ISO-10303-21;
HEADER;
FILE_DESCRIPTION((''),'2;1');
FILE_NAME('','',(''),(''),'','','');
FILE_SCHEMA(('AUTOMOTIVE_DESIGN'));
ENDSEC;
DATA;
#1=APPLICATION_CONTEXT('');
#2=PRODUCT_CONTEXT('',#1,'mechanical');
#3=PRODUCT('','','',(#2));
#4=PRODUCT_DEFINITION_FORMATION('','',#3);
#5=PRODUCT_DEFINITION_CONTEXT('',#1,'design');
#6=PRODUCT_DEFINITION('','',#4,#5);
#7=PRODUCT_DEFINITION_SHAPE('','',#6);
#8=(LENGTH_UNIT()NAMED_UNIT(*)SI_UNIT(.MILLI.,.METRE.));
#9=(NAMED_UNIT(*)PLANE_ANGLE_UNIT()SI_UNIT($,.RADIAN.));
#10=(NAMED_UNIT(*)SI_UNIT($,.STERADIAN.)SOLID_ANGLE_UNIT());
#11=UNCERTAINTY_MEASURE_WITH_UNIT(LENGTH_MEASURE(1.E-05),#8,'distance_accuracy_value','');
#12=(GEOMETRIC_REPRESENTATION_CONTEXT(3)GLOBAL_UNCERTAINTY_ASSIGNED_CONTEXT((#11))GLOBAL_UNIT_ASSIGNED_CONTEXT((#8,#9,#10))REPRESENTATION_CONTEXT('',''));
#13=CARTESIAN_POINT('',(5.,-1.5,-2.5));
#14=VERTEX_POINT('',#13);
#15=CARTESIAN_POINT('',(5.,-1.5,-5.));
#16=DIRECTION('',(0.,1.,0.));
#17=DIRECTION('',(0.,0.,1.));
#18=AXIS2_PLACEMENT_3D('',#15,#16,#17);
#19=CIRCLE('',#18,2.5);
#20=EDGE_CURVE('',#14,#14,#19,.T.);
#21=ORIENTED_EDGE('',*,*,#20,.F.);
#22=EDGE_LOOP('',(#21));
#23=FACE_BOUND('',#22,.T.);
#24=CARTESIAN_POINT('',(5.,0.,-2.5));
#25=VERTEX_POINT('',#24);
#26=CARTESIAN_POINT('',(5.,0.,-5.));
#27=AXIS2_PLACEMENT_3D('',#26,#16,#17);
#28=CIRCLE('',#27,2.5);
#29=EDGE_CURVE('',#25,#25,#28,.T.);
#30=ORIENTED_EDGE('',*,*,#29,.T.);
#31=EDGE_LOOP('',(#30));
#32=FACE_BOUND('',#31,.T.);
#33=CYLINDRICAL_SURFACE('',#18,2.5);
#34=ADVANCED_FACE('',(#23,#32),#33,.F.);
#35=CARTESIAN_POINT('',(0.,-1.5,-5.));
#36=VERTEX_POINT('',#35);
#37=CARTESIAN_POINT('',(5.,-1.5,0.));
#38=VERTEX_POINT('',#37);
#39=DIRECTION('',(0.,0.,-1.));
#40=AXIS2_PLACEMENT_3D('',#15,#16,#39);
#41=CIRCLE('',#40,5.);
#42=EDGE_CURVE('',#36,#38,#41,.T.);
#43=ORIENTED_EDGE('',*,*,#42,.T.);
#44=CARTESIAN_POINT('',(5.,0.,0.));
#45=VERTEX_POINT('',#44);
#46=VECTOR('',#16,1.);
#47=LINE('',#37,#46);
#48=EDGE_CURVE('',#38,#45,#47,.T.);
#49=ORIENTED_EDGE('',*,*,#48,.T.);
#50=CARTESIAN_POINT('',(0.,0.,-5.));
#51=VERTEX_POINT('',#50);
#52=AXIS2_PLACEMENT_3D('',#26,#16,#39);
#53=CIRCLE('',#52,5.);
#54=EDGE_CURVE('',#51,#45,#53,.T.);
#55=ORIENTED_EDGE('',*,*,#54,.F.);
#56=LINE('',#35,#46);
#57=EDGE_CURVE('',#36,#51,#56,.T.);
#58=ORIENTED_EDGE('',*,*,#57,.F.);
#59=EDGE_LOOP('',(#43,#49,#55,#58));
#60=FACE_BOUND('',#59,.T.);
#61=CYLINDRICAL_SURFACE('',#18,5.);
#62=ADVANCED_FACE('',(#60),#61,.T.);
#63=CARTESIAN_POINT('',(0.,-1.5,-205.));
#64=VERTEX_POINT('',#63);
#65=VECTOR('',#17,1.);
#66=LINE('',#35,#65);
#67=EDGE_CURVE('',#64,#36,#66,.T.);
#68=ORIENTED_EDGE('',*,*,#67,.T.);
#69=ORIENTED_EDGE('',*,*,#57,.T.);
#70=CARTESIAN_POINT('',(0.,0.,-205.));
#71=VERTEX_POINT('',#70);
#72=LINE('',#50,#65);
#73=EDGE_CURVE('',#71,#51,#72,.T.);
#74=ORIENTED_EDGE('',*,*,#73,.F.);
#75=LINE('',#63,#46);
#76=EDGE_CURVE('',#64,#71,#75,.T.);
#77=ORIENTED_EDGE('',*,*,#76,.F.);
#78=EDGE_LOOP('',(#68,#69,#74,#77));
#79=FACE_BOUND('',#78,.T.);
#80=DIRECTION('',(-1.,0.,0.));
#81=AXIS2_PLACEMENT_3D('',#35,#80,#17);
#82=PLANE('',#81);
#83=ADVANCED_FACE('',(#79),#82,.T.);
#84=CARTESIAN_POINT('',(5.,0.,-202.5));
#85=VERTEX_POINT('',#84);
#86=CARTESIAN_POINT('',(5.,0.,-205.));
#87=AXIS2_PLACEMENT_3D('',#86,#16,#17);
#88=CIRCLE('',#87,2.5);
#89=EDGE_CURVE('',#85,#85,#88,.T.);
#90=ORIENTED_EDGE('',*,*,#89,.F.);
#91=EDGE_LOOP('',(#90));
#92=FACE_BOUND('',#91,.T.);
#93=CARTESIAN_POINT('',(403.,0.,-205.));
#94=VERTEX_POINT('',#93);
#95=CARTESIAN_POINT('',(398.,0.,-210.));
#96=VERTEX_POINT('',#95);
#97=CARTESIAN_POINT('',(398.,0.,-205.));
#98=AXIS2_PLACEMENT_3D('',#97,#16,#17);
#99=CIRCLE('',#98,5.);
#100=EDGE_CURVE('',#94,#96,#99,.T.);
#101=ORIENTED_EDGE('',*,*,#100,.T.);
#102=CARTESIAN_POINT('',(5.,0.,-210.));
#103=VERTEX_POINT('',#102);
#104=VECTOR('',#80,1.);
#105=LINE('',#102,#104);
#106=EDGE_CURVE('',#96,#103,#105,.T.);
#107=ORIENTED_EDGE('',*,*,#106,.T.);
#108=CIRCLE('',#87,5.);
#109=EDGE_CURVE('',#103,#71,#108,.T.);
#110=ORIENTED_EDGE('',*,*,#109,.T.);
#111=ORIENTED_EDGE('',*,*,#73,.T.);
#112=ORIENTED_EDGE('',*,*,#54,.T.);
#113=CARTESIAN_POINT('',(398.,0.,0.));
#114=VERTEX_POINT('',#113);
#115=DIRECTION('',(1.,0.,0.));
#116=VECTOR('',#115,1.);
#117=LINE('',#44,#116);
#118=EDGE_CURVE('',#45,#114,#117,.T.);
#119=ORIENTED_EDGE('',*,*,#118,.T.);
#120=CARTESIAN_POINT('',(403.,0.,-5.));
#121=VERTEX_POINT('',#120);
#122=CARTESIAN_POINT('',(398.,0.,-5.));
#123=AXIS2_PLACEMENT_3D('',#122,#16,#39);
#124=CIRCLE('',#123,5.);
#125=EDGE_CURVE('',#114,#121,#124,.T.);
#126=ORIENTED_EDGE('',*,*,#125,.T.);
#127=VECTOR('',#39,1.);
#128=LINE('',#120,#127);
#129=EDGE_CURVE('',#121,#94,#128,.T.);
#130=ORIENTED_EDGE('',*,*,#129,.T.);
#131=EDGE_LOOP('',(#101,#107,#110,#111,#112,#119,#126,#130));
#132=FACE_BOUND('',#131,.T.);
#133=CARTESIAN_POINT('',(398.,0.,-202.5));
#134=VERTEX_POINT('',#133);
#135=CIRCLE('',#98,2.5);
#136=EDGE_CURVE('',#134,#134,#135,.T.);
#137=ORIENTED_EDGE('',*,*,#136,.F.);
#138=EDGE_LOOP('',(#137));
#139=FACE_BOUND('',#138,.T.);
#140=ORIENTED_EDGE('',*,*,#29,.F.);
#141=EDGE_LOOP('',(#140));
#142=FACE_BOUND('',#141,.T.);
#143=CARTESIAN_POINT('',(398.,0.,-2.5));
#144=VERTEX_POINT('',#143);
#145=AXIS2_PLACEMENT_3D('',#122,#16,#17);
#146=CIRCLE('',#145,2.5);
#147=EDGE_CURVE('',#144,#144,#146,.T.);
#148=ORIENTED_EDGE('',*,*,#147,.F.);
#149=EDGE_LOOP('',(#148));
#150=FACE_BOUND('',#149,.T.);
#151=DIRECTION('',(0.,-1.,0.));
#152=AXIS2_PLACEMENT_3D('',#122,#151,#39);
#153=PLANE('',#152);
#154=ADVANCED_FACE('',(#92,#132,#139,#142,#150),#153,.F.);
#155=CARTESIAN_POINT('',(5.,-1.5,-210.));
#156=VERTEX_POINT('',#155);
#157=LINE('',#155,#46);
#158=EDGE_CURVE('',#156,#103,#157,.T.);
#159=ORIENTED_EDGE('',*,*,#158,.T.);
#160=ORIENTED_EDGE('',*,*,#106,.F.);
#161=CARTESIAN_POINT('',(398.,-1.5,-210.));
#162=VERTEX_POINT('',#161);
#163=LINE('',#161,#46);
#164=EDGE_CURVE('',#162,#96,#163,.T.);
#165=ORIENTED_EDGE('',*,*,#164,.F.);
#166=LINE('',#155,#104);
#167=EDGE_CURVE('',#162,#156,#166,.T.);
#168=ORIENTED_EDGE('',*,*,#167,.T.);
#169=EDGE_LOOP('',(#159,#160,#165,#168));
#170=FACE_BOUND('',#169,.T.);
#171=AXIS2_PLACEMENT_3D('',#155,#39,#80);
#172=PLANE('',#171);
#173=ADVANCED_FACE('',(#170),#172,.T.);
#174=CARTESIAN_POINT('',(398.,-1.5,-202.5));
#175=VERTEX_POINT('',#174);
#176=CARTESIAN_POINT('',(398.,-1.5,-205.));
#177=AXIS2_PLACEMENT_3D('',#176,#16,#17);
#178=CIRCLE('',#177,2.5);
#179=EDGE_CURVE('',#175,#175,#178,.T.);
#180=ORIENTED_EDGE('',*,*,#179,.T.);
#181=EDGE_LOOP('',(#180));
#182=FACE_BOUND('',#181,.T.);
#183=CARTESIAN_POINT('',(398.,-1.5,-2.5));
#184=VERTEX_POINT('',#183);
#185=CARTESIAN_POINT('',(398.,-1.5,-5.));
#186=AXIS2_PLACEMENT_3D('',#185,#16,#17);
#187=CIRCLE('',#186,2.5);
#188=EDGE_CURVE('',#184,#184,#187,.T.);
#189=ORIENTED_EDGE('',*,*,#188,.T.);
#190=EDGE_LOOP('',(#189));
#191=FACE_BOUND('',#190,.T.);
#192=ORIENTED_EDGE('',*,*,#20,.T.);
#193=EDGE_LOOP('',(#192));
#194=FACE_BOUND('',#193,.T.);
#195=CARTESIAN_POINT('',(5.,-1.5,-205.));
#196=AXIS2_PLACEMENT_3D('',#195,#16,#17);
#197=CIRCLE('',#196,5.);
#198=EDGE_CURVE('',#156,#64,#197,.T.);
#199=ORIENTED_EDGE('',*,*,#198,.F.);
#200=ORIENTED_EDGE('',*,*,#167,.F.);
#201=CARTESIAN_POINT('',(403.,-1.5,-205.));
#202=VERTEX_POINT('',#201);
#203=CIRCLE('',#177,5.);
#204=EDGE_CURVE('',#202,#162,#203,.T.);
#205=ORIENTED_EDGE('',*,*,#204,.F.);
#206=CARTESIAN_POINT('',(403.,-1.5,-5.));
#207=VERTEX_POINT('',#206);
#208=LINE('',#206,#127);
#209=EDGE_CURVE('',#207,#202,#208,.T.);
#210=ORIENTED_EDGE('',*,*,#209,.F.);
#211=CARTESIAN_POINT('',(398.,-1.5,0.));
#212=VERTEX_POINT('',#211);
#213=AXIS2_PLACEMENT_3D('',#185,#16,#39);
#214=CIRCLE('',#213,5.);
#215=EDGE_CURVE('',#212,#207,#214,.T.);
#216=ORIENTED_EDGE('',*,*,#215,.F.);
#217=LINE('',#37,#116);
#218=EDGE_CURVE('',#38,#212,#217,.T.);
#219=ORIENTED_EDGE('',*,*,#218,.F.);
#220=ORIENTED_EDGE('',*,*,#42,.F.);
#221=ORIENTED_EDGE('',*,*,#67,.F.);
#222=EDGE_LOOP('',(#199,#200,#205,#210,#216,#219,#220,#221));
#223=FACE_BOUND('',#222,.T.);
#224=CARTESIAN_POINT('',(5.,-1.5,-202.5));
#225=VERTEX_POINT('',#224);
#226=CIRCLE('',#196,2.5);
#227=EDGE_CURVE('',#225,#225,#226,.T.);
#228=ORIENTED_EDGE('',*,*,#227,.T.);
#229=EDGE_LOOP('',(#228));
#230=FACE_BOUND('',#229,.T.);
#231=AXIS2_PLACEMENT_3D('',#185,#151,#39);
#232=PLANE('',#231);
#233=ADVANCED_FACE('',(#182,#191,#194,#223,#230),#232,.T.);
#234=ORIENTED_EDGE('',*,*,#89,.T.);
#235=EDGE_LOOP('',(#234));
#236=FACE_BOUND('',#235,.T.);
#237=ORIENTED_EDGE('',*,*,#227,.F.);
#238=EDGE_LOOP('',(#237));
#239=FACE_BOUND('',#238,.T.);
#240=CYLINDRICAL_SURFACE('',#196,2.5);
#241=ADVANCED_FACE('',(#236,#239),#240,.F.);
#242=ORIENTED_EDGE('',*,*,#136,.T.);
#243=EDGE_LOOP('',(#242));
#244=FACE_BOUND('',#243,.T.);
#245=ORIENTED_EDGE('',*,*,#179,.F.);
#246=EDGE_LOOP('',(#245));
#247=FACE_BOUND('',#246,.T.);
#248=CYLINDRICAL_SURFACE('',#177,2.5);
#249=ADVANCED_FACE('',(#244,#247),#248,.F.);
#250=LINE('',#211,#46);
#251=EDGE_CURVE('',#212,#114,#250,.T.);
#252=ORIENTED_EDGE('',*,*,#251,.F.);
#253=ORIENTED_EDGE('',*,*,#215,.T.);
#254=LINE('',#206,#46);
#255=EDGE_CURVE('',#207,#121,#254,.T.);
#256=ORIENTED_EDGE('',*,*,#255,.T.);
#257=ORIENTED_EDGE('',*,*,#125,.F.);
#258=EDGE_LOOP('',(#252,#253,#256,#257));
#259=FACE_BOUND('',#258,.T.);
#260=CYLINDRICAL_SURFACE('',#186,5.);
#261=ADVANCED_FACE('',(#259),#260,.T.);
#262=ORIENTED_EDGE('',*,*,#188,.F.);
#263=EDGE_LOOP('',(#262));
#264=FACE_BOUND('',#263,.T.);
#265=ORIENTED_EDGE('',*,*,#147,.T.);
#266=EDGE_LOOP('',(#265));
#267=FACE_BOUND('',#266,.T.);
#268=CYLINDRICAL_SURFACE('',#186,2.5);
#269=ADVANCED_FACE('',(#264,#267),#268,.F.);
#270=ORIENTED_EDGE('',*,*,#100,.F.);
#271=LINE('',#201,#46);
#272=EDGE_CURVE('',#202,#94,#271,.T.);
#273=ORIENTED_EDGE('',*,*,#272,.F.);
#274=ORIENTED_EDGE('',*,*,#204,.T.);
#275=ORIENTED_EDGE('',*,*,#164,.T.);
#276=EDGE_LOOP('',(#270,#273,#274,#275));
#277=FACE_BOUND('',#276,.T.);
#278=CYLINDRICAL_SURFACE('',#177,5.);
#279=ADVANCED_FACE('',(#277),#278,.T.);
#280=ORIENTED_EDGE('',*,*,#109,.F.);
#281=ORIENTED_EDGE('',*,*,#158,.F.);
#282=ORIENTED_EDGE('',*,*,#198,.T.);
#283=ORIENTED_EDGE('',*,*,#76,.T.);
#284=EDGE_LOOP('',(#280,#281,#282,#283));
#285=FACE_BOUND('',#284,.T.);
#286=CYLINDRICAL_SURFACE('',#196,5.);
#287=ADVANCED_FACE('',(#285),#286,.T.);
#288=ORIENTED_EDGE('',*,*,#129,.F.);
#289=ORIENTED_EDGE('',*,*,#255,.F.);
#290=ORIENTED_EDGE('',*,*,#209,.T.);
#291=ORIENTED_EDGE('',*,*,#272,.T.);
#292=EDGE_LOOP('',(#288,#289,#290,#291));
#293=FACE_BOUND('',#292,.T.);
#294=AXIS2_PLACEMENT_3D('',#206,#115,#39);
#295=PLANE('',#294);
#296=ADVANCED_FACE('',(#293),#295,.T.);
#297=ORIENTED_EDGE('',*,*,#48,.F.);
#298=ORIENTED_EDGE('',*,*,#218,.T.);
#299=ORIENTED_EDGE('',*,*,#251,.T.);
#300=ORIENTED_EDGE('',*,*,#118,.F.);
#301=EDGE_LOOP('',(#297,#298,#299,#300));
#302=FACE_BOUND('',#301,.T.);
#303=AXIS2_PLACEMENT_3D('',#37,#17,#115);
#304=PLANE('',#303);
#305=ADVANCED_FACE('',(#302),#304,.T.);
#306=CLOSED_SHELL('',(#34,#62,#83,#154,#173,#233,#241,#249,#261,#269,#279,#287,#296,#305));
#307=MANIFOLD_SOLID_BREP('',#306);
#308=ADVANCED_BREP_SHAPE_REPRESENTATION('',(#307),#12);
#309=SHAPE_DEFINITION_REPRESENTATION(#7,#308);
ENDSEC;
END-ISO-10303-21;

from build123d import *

# Parameters (mm, degrees)
SKETCH1_R          = 2.5
BASE_FLANGE1_DEPTH = 1.5


# Sheet-metal steps are written as plain solids
with BuildPart() as part:
    # Sketch1 → Base-Flange1 (new body)
    with BuildSketch(Plane(origin=(0, 0, 0), x_dir=(1, 0, 0), z_dir=(0, 1, 0))):
        with BuildLine():
            Line((5, 0), (398, 0))
            ThreePointArc((398, 0), (401.535533906, 1.464466094), (403, 5))
            Line((403, 5), (403, 205))
            ThreePointArc((403, 205), (401.535533906, 208.535533906), (398, 210))
            Line((398, 210), (5, 210))
            ThreePointArc((5, 210), (1.464466094, 208.535533906), (0, 205))
            Line((0, 205), (0, 5))
            ThreePointArc((0, 5), (1.464466094, 1.464466094), (5, 0))
        make_face()
        with Locations(Location((5, 205, 0), (0, 0, 270))):
            Circle(SKETCH1_R, mode=Mode.SUBTRACT)
        with Locations(Location((5, 5, 0), (0, 0, 270))):
            Circle(SKETCH1_R, mode=Mode.SUBTRACT)
        with Locations(Location((398, 5, 0), (0, 0, 270))):
            Circle(SKETCH1_R, mode=Mode.SUBTRACT)
        with Locations(Location((398, 205, 0), (0, 0, 270))):
            Circle(SKETCH1_R, mode=Mode.SUBTRACT)
    extrude(amount=-BASE_FLANGE1_DEPTH)


solid = part.part
